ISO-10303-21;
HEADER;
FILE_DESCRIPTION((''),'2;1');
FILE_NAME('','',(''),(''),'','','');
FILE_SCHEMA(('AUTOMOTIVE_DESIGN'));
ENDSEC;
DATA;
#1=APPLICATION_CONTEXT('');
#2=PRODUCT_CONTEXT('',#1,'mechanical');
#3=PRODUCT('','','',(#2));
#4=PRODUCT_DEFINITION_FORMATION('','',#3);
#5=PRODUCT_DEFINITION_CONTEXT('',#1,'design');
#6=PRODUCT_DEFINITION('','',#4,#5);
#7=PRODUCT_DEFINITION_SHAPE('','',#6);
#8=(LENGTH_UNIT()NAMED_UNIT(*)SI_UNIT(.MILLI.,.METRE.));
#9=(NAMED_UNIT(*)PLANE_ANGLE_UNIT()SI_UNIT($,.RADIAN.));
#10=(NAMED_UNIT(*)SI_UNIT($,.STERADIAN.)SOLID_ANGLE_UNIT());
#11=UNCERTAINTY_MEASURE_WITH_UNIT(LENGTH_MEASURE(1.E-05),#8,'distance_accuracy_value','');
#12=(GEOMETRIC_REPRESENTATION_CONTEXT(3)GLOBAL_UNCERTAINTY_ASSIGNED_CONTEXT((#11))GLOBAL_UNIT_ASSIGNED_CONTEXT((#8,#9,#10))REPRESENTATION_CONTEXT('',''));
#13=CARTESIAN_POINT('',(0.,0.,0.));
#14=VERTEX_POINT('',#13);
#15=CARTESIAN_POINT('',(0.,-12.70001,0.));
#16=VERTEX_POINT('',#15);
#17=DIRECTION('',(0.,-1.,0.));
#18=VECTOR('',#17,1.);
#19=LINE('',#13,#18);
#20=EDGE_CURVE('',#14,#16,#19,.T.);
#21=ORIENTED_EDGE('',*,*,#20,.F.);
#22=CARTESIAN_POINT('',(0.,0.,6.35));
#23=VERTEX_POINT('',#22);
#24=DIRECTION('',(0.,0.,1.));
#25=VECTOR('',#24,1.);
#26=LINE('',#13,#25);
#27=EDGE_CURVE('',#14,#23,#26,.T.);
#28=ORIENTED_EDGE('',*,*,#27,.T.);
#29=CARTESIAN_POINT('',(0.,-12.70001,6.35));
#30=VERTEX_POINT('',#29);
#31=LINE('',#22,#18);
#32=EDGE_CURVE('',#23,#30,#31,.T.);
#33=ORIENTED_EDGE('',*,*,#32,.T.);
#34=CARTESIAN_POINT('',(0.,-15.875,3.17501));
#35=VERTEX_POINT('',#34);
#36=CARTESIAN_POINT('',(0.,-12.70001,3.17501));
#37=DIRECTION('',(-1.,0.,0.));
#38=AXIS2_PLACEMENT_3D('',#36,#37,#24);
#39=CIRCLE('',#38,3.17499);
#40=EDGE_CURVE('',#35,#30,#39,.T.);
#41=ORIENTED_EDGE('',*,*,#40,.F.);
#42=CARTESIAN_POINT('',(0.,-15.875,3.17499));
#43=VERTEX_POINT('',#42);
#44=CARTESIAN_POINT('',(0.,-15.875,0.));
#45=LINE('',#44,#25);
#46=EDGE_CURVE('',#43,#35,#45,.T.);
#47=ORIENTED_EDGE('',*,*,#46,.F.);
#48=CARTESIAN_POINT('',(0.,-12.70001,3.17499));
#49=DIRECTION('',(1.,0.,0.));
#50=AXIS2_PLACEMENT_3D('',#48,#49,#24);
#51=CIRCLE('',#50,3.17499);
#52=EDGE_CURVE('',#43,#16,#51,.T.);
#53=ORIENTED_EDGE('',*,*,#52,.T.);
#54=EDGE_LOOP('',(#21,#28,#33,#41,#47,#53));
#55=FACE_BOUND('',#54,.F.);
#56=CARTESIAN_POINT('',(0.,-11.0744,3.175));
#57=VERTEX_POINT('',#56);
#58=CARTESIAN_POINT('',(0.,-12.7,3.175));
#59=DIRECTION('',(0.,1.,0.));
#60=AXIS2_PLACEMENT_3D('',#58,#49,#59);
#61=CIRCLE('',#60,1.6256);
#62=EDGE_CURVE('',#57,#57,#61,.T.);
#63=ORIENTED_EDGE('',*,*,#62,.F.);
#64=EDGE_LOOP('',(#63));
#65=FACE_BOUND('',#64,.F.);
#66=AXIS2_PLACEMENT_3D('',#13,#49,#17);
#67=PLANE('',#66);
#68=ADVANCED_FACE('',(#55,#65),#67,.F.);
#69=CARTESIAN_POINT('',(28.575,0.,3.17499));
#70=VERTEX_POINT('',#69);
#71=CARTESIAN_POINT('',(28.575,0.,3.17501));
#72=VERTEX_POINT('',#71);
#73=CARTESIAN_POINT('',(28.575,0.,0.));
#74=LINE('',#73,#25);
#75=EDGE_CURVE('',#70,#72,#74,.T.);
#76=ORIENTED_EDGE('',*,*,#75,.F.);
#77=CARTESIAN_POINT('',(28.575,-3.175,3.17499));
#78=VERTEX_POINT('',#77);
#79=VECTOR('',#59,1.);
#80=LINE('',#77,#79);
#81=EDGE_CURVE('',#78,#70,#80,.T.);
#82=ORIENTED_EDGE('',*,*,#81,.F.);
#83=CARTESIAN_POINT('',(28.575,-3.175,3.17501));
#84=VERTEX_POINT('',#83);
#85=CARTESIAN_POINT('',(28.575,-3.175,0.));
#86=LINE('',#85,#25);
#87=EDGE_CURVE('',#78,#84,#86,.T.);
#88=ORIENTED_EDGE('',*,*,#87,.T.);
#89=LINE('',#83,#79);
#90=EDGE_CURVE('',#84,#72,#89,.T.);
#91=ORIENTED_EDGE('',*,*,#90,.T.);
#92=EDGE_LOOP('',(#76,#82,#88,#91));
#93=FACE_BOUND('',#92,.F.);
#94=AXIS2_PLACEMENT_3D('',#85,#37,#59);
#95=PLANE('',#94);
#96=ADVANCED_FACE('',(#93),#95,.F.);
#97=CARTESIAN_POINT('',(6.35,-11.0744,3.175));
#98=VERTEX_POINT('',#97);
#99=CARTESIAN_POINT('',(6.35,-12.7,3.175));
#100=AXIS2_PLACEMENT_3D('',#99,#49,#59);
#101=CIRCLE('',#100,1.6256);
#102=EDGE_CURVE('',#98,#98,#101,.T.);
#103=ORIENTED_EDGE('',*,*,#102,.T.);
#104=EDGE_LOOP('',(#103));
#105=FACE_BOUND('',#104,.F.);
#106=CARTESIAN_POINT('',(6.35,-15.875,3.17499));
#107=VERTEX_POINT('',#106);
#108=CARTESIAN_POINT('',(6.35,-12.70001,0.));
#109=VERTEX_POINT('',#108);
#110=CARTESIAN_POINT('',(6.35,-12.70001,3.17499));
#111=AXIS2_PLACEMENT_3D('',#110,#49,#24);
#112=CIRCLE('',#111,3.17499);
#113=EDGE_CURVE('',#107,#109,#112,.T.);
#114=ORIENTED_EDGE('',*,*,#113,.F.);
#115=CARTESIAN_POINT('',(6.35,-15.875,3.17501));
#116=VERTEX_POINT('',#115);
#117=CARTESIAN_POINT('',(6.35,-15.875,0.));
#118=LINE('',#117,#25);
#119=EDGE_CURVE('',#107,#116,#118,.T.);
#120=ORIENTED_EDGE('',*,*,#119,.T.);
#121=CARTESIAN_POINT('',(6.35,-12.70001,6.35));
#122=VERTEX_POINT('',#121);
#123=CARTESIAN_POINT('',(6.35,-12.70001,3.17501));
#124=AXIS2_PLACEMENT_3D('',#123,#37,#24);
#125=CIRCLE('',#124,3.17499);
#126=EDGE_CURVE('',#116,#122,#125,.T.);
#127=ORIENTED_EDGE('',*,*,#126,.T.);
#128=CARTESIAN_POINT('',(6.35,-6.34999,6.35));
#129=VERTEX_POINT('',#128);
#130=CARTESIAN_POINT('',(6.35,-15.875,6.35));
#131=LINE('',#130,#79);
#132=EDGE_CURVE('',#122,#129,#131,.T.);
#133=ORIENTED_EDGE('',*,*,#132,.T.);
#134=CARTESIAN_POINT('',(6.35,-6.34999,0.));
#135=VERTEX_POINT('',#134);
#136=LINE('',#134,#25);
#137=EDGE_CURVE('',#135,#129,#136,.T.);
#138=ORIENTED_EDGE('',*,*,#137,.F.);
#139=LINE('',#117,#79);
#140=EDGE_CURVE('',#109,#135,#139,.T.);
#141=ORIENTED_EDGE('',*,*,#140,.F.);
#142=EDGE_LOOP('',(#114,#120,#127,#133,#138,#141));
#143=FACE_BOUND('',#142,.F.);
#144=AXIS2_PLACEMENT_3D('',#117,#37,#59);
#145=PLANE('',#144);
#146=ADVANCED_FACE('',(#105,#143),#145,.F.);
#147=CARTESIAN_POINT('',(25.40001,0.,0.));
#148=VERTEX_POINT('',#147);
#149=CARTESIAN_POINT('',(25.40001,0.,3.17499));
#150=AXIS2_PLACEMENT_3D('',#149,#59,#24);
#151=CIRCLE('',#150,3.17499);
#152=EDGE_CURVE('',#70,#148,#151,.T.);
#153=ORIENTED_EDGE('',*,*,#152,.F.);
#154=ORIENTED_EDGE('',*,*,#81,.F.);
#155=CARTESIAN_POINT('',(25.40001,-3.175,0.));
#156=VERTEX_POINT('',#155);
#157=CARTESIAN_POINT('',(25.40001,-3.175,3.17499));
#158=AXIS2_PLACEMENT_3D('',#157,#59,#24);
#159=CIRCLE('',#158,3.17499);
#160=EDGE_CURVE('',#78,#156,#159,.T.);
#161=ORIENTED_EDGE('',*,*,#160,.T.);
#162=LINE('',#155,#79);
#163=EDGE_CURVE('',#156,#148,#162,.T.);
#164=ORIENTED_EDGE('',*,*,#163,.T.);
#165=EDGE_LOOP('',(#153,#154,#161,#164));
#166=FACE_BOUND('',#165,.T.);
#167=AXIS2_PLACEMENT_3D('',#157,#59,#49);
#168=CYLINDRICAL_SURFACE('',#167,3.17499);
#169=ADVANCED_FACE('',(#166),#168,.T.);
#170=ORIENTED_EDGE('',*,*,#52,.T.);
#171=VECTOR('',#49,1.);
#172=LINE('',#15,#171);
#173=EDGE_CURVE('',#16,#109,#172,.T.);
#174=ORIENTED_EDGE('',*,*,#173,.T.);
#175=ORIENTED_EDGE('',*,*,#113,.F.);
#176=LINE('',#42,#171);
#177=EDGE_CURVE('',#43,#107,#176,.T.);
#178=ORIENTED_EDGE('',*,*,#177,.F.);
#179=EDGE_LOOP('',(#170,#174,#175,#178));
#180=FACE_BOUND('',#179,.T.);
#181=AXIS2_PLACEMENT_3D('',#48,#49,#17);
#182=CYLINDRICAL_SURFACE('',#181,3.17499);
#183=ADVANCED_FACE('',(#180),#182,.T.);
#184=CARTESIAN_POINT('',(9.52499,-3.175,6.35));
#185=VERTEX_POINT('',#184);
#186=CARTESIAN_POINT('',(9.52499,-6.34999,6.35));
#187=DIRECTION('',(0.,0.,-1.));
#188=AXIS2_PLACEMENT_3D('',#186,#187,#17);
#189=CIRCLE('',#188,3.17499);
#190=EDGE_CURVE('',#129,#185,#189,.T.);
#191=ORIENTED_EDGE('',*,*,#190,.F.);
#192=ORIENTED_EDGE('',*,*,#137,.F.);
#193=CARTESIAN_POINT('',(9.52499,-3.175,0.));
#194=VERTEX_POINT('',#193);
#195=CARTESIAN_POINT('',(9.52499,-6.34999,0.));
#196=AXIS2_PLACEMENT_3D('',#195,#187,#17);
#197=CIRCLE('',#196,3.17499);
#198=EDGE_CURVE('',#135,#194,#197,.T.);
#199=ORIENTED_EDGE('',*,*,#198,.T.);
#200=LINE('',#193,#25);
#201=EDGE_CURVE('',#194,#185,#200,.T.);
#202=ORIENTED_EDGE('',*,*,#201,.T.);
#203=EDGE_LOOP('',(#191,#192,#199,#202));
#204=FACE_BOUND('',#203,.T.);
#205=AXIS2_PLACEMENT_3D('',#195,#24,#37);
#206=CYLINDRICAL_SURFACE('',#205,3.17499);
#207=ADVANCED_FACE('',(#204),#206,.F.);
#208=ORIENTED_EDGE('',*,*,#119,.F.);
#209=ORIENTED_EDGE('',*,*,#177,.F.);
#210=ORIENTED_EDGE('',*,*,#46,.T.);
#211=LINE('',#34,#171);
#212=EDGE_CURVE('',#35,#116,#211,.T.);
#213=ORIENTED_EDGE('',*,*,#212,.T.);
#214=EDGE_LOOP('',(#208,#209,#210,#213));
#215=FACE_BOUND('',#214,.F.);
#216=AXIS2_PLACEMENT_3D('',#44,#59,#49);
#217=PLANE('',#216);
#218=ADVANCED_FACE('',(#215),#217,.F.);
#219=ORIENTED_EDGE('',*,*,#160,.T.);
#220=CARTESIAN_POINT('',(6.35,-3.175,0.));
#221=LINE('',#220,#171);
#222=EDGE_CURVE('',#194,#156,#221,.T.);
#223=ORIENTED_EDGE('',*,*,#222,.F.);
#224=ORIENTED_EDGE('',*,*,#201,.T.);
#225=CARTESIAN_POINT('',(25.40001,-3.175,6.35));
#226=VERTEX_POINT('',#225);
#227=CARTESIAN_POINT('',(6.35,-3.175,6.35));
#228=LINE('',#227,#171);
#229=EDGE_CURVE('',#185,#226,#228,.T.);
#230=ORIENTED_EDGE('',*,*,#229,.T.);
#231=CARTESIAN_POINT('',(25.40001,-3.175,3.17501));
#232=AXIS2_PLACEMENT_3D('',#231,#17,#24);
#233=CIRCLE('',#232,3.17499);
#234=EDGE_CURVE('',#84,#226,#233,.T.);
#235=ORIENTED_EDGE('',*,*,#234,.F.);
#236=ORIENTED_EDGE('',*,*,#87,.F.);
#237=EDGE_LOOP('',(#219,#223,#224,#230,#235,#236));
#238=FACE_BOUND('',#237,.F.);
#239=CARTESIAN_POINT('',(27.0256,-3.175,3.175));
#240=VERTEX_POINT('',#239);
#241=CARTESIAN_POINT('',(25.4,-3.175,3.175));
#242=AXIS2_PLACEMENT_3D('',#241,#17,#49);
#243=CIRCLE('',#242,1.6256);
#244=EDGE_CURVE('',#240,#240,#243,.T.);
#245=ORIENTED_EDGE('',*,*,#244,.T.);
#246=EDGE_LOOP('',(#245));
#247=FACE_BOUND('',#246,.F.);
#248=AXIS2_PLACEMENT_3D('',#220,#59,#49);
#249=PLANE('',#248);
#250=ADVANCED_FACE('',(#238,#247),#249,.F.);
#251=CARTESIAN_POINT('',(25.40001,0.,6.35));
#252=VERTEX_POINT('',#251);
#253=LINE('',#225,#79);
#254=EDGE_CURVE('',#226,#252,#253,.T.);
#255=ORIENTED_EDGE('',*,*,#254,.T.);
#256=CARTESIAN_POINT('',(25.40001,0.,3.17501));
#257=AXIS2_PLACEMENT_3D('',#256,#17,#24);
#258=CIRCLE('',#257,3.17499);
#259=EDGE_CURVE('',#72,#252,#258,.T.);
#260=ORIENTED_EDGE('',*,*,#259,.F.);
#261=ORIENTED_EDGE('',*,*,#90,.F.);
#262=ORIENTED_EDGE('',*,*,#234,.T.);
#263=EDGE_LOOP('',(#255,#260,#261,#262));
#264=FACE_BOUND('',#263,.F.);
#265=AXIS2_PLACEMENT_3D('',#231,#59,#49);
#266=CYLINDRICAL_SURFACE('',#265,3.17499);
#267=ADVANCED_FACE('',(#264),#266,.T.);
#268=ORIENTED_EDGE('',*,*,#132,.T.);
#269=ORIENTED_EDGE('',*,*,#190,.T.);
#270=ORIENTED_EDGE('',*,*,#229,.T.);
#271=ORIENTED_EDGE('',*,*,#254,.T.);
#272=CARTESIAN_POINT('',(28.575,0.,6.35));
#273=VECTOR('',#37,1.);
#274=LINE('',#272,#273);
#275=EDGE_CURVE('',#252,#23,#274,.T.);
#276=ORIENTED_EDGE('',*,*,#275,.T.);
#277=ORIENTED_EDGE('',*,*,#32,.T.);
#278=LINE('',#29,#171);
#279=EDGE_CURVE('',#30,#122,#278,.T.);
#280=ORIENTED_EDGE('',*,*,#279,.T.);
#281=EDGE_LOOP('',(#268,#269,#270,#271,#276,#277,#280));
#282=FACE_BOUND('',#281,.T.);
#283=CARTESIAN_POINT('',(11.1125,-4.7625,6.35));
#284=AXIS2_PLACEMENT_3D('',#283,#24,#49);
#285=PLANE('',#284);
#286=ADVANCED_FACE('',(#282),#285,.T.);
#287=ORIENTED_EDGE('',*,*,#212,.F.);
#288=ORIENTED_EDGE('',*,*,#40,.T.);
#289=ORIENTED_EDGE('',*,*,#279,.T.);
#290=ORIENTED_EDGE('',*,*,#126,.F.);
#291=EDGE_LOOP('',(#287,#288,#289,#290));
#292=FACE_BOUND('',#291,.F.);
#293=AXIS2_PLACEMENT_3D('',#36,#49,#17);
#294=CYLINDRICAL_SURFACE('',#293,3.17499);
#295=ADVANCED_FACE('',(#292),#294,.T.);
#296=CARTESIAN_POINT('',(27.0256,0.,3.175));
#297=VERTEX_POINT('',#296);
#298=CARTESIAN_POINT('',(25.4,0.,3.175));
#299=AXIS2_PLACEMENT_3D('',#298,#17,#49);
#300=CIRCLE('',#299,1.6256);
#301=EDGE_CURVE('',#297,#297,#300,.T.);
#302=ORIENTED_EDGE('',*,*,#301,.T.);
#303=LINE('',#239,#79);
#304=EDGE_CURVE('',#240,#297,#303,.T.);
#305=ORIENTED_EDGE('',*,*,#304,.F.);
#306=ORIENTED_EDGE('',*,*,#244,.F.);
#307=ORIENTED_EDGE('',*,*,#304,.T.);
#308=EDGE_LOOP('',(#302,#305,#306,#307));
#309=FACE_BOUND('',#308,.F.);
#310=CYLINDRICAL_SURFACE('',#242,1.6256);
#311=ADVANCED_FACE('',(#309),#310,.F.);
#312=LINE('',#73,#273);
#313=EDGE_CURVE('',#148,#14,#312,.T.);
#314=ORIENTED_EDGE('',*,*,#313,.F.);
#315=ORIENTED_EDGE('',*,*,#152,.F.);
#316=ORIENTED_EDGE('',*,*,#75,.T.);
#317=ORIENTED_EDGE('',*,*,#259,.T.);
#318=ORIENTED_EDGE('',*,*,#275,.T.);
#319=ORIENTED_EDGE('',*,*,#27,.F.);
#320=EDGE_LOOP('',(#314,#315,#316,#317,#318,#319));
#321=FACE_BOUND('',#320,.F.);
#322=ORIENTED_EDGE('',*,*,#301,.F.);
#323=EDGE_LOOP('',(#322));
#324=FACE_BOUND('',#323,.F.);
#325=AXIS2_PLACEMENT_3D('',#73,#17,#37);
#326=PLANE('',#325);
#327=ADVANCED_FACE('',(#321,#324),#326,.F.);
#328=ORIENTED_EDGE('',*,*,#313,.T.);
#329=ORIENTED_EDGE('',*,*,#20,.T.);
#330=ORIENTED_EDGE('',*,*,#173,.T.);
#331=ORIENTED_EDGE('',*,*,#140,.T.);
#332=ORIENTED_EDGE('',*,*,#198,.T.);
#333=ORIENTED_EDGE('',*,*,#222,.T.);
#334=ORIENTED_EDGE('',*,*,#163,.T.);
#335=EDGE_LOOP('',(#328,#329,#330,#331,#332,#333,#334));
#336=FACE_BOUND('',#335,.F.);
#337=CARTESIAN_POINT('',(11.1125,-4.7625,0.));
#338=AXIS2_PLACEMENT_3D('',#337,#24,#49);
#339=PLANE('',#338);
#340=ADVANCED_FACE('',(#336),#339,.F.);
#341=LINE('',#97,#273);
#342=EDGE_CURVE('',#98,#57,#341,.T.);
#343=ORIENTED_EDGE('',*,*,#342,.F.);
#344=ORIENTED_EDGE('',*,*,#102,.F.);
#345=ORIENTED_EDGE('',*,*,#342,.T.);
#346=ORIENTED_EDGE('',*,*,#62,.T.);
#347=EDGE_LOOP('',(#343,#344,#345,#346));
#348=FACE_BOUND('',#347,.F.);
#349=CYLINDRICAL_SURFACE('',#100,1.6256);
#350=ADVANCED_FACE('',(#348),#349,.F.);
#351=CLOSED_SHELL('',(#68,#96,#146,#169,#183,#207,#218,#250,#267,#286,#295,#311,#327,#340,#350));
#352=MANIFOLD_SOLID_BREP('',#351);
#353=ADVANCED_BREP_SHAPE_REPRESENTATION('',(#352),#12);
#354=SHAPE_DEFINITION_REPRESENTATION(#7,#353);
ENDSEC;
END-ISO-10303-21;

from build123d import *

# Parameters (mm, degrees)
F1_DEPTH = 6.35
F2_R     = 3.17499
F3_R     = 1.6256
F4_DEPTH = 6.351
F5_R     = 1.6256
F6_DEPTH = 3.176


# Not quite as in the source:
# - a fillet or chamfer is up to 0.001 mm smaller than in the source, because OpenCascade refuses the exact size


with BuildPart() as f1:
    # F0 (on Top) → F1 (new body)
    with BuildSketch(Plane.XY):
        Polygon((0, 0), (0, -15.875), (6.35, -15.875), (6.35, -3.175), (28.575, -3.175), (28.575, 0), align=None)
    extrude(amount=F1_DEPTH)

    # F2 (radius 3.175 in the source; OpenCascade refuses exactly that, so slightly less here)
    f2_edges = [f1.edges().sort_by_distance(p)[0] for p in [
        (3.175, -15.875, 6.35),
        (3.175, -15.875, 0),
        (28.575, -1.5875, 6.35),
        (28.575, -1.5875, 0),
        (6.35, -3.175, 3.175),
    ]]
    fillet(f2_edges, radius=F2_R)

    # F3 (on face) → F4 (cut, through all)
    with BuildSketch(Plane.YZ.offset(6.35)):
        with Locations((-12.7, 3.175)):
            Circle(F3_R)
    extrude(amount=-F4_DEPTH, mode=Mode.SUBTRACT)

    # F5 (on face) → F6 (cut, through all)
    with BuildSketch(Plane.XZ.offset(3.175)):
        with Locations((25.4, 3.175)):
            Circle(F5_R)
    extrude(amount=-F6_DEPTH, mode=Mode.SUBTRACT)


solid = f1.part
